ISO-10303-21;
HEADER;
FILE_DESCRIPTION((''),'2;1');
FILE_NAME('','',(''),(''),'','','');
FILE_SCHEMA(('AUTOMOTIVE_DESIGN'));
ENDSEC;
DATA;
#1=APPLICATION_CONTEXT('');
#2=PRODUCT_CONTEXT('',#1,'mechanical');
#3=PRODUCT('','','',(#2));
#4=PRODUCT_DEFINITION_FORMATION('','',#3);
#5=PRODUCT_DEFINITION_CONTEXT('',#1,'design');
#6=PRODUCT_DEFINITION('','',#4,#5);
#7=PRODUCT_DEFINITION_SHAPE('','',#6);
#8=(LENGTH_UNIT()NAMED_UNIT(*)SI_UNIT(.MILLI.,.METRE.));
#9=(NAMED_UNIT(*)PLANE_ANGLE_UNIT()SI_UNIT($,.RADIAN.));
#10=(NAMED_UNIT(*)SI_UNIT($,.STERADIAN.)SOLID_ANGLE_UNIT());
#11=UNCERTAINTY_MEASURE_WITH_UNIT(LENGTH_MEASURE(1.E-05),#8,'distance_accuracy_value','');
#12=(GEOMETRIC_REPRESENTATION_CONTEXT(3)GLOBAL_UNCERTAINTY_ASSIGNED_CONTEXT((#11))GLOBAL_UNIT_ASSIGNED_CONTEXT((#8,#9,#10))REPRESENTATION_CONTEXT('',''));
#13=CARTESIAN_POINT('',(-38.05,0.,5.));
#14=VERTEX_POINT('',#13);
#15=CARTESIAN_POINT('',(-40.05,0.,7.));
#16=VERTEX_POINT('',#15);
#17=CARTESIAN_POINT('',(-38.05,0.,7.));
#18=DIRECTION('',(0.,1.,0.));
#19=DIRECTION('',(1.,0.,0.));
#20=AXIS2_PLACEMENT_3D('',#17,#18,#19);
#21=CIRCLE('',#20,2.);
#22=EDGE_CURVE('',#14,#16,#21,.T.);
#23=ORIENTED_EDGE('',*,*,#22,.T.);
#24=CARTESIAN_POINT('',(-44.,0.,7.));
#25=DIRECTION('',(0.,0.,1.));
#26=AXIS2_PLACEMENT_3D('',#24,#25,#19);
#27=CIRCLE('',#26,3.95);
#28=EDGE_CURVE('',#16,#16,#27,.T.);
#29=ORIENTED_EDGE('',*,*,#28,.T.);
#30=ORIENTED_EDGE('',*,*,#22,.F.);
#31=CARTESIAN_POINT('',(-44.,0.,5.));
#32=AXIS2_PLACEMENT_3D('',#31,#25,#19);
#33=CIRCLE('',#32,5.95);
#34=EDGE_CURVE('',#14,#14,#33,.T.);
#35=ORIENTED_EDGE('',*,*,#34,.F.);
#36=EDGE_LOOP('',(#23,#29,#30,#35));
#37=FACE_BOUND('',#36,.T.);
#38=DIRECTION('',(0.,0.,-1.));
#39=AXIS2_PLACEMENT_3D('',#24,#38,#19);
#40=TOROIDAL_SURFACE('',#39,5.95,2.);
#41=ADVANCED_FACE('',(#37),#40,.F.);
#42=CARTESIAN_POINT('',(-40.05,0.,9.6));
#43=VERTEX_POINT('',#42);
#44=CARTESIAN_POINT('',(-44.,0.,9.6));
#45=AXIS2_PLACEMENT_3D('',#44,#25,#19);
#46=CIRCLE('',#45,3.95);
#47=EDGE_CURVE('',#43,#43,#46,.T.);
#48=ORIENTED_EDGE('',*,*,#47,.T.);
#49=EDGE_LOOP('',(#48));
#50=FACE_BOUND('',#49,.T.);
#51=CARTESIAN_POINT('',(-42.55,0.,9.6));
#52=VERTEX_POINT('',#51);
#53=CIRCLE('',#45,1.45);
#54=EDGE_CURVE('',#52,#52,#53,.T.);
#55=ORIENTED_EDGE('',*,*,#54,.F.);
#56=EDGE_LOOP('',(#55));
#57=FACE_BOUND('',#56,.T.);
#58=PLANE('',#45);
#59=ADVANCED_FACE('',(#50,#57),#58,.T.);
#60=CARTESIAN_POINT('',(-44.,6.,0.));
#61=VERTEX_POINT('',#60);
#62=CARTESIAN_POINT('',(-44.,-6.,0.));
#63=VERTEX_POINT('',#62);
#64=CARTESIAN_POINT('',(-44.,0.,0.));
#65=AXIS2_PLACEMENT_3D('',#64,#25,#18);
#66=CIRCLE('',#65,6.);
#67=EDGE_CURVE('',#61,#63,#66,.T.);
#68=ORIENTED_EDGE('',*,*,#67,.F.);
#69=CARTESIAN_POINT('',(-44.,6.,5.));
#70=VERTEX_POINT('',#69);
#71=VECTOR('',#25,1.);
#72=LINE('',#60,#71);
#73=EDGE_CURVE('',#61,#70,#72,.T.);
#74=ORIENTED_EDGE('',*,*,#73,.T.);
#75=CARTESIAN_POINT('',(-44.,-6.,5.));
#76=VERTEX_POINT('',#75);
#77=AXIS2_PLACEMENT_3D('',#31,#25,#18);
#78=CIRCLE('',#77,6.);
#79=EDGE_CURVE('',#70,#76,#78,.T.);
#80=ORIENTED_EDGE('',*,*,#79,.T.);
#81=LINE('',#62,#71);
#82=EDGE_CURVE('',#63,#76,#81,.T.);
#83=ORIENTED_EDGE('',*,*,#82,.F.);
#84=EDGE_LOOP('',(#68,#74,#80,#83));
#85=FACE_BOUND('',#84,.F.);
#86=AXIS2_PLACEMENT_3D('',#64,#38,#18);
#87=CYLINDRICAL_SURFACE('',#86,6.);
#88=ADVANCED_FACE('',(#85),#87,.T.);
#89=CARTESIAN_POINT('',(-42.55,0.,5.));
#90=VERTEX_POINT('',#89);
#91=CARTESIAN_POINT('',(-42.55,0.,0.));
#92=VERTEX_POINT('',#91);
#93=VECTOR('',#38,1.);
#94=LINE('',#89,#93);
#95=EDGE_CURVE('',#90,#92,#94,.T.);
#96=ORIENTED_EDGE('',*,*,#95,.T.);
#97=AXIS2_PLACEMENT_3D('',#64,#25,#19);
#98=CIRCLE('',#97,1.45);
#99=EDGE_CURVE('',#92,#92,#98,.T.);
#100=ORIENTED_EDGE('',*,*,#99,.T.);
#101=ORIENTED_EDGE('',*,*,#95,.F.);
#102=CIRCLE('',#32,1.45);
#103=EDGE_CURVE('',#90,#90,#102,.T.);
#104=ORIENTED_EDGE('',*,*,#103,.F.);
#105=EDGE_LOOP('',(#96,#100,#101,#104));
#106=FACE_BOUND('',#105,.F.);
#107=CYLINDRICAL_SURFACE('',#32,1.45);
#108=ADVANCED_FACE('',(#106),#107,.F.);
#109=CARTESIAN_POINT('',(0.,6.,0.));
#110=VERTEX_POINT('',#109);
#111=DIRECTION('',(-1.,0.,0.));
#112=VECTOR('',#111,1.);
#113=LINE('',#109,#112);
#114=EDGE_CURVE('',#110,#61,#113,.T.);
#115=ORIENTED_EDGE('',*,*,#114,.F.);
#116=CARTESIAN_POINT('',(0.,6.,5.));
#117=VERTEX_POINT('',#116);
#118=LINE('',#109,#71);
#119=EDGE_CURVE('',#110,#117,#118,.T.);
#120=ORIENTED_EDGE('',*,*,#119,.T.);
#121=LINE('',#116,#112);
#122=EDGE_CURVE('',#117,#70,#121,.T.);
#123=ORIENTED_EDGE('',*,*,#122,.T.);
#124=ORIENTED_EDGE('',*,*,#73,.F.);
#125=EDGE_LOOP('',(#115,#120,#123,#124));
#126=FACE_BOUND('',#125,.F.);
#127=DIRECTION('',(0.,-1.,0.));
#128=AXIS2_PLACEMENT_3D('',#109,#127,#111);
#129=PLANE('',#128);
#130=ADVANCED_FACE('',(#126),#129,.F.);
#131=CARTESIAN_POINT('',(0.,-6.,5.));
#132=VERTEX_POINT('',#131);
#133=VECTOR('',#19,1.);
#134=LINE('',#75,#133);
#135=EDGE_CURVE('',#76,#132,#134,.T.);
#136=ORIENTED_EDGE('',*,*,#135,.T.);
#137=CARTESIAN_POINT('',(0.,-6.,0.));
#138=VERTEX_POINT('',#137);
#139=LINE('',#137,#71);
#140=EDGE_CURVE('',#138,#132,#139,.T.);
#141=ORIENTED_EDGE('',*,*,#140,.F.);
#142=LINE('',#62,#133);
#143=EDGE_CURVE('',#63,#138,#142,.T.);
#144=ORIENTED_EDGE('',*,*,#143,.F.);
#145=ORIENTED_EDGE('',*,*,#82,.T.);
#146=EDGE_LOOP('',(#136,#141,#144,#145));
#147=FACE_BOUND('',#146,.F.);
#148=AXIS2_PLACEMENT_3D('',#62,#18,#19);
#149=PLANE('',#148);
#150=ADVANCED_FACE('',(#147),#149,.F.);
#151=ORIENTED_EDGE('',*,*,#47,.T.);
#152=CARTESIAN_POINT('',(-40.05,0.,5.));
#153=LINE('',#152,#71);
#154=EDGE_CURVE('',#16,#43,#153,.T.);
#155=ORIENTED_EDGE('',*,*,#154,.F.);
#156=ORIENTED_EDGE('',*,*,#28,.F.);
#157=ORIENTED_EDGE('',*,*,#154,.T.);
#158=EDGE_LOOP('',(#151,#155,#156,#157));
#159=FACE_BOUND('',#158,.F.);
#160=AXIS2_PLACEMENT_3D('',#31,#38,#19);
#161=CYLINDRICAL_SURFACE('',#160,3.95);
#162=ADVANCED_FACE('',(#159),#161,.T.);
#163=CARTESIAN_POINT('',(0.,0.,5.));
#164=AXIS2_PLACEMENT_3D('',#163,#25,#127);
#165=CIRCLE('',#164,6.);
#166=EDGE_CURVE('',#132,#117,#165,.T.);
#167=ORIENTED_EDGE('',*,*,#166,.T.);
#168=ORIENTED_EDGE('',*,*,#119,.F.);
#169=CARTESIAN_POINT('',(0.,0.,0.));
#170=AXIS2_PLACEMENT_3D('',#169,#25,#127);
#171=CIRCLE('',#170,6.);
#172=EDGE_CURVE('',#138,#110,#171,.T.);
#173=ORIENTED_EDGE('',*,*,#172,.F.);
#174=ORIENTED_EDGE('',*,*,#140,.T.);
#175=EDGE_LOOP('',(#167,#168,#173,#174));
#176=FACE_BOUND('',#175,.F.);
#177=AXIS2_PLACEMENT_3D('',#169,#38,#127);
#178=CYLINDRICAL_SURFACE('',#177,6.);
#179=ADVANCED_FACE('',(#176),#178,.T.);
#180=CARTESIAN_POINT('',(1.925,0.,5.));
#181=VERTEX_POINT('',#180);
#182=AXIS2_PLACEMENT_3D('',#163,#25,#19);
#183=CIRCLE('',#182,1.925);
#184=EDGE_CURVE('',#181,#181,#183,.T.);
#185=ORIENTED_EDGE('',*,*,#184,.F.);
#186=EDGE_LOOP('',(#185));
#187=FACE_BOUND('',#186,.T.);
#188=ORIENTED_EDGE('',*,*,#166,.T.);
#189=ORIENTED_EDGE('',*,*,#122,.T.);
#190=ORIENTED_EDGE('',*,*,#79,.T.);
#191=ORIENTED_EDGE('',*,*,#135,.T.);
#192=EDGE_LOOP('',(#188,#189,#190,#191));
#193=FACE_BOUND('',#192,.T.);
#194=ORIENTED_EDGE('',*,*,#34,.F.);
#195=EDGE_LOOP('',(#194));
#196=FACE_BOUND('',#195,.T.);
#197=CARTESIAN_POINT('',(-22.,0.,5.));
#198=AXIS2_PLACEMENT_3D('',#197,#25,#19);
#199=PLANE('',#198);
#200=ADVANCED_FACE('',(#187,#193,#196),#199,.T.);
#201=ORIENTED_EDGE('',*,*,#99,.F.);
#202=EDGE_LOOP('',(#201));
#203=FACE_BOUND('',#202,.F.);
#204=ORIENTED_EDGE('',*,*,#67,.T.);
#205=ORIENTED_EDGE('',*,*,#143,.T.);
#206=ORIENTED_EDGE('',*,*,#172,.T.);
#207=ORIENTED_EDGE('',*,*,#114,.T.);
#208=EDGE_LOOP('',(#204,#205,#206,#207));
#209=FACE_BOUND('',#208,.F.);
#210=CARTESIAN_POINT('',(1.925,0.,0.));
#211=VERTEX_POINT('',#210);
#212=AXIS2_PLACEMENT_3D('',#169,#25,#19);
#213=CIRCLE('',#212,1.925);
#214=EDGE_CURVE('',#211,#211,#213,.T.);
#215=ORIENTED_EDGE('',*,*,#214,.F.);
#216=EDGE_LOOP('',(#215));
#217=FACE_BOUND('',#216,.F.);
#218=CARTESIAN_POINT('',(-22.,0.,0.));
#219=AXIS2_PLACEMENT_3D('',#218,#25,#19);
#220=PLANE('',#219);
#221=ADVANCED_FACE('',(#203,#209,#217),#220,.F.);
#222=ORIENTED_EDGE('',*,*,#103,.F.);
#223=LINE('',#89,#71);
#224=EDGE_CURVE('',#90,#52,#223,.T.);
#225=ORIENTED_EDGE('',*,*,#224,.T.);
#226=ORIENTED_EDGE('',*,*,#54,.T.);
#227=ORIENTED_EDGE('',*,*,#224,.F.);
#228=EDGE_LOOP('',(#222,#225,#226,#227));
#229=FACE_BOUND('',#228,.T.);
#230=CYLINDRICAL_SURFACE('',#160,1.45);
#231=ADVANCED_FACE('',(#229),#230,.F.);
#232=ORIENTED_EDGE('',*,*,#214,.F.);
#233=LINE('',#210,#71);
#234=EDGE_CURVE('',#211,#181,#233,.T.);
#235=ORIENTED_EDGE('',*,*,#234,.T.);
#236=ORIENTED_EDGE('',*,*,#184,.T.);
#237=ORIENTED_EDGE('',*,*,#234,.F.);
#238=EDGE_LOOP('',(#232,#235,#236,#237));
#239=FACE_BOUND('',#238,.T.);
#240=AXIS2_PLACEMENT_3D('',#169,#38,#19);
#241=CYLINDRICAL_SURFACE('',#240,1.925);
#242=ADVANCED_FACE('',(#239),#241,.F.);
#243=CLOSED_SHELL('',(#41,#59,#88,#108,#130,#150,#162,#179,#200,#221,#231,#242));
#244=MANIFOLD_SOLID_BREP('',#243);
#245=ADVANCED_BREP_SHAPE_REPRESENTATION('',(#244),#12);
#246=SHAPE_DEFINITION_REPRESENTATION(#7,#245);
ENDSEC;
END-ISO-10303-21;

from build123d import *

# Parameters (mm, degrees)
F0_R          = 1.925
F1_DEPTH      = 5
F2_R          = 3.95
F2_R_2        = 1.45
F3_DEPTH      = 4.6
F3_DEPTH_BACK = 5
F4_R          = 2


with BuildPart() as f1:
    # F0 (on Top) → F1 (new body)
    with BuildSketch(Plane.XY):
        with BuildLine():
            Line((-44, -6), (0, -6))
            ThreePointArc((0, -6), (6, 0), (0, 6))
            Line((0, 6), (-44, 6))
            ThreePointArc((-44, 6), (-50, 0), (-44, -6))
        make_face()
        with Locations((-44, 0)):
            Circle(F0_R, mode=Mode.SUBTRACT)
        Circle(F0_R, mode=Mode.SUBTRACT)
    extrude(amount=F1_DEPTH)

    # F2 (on face) → F3 (join, two sides)
    with BuildSketch(Plane.XY.offset(5)) as f3_sk:
        with Locations((-44, 0)):
            Circle(F2_R)
        with Locations((-44, 0)):
            Circle(F2_R_2, mode=Mode.SUBTRACT)
    extrude(amount=F3_DEPTH)
    extrude(f3_sk.sketch, amount=-F3_DEPTH_BACK)

    # F4
    f4_edges = [f1.edges().sort_by_distance(p)[0] for p in [
        (-47.95, 0, 5),
    ]]
    fillet(f4_edges, radius=F4_R)


solid = f1.part
